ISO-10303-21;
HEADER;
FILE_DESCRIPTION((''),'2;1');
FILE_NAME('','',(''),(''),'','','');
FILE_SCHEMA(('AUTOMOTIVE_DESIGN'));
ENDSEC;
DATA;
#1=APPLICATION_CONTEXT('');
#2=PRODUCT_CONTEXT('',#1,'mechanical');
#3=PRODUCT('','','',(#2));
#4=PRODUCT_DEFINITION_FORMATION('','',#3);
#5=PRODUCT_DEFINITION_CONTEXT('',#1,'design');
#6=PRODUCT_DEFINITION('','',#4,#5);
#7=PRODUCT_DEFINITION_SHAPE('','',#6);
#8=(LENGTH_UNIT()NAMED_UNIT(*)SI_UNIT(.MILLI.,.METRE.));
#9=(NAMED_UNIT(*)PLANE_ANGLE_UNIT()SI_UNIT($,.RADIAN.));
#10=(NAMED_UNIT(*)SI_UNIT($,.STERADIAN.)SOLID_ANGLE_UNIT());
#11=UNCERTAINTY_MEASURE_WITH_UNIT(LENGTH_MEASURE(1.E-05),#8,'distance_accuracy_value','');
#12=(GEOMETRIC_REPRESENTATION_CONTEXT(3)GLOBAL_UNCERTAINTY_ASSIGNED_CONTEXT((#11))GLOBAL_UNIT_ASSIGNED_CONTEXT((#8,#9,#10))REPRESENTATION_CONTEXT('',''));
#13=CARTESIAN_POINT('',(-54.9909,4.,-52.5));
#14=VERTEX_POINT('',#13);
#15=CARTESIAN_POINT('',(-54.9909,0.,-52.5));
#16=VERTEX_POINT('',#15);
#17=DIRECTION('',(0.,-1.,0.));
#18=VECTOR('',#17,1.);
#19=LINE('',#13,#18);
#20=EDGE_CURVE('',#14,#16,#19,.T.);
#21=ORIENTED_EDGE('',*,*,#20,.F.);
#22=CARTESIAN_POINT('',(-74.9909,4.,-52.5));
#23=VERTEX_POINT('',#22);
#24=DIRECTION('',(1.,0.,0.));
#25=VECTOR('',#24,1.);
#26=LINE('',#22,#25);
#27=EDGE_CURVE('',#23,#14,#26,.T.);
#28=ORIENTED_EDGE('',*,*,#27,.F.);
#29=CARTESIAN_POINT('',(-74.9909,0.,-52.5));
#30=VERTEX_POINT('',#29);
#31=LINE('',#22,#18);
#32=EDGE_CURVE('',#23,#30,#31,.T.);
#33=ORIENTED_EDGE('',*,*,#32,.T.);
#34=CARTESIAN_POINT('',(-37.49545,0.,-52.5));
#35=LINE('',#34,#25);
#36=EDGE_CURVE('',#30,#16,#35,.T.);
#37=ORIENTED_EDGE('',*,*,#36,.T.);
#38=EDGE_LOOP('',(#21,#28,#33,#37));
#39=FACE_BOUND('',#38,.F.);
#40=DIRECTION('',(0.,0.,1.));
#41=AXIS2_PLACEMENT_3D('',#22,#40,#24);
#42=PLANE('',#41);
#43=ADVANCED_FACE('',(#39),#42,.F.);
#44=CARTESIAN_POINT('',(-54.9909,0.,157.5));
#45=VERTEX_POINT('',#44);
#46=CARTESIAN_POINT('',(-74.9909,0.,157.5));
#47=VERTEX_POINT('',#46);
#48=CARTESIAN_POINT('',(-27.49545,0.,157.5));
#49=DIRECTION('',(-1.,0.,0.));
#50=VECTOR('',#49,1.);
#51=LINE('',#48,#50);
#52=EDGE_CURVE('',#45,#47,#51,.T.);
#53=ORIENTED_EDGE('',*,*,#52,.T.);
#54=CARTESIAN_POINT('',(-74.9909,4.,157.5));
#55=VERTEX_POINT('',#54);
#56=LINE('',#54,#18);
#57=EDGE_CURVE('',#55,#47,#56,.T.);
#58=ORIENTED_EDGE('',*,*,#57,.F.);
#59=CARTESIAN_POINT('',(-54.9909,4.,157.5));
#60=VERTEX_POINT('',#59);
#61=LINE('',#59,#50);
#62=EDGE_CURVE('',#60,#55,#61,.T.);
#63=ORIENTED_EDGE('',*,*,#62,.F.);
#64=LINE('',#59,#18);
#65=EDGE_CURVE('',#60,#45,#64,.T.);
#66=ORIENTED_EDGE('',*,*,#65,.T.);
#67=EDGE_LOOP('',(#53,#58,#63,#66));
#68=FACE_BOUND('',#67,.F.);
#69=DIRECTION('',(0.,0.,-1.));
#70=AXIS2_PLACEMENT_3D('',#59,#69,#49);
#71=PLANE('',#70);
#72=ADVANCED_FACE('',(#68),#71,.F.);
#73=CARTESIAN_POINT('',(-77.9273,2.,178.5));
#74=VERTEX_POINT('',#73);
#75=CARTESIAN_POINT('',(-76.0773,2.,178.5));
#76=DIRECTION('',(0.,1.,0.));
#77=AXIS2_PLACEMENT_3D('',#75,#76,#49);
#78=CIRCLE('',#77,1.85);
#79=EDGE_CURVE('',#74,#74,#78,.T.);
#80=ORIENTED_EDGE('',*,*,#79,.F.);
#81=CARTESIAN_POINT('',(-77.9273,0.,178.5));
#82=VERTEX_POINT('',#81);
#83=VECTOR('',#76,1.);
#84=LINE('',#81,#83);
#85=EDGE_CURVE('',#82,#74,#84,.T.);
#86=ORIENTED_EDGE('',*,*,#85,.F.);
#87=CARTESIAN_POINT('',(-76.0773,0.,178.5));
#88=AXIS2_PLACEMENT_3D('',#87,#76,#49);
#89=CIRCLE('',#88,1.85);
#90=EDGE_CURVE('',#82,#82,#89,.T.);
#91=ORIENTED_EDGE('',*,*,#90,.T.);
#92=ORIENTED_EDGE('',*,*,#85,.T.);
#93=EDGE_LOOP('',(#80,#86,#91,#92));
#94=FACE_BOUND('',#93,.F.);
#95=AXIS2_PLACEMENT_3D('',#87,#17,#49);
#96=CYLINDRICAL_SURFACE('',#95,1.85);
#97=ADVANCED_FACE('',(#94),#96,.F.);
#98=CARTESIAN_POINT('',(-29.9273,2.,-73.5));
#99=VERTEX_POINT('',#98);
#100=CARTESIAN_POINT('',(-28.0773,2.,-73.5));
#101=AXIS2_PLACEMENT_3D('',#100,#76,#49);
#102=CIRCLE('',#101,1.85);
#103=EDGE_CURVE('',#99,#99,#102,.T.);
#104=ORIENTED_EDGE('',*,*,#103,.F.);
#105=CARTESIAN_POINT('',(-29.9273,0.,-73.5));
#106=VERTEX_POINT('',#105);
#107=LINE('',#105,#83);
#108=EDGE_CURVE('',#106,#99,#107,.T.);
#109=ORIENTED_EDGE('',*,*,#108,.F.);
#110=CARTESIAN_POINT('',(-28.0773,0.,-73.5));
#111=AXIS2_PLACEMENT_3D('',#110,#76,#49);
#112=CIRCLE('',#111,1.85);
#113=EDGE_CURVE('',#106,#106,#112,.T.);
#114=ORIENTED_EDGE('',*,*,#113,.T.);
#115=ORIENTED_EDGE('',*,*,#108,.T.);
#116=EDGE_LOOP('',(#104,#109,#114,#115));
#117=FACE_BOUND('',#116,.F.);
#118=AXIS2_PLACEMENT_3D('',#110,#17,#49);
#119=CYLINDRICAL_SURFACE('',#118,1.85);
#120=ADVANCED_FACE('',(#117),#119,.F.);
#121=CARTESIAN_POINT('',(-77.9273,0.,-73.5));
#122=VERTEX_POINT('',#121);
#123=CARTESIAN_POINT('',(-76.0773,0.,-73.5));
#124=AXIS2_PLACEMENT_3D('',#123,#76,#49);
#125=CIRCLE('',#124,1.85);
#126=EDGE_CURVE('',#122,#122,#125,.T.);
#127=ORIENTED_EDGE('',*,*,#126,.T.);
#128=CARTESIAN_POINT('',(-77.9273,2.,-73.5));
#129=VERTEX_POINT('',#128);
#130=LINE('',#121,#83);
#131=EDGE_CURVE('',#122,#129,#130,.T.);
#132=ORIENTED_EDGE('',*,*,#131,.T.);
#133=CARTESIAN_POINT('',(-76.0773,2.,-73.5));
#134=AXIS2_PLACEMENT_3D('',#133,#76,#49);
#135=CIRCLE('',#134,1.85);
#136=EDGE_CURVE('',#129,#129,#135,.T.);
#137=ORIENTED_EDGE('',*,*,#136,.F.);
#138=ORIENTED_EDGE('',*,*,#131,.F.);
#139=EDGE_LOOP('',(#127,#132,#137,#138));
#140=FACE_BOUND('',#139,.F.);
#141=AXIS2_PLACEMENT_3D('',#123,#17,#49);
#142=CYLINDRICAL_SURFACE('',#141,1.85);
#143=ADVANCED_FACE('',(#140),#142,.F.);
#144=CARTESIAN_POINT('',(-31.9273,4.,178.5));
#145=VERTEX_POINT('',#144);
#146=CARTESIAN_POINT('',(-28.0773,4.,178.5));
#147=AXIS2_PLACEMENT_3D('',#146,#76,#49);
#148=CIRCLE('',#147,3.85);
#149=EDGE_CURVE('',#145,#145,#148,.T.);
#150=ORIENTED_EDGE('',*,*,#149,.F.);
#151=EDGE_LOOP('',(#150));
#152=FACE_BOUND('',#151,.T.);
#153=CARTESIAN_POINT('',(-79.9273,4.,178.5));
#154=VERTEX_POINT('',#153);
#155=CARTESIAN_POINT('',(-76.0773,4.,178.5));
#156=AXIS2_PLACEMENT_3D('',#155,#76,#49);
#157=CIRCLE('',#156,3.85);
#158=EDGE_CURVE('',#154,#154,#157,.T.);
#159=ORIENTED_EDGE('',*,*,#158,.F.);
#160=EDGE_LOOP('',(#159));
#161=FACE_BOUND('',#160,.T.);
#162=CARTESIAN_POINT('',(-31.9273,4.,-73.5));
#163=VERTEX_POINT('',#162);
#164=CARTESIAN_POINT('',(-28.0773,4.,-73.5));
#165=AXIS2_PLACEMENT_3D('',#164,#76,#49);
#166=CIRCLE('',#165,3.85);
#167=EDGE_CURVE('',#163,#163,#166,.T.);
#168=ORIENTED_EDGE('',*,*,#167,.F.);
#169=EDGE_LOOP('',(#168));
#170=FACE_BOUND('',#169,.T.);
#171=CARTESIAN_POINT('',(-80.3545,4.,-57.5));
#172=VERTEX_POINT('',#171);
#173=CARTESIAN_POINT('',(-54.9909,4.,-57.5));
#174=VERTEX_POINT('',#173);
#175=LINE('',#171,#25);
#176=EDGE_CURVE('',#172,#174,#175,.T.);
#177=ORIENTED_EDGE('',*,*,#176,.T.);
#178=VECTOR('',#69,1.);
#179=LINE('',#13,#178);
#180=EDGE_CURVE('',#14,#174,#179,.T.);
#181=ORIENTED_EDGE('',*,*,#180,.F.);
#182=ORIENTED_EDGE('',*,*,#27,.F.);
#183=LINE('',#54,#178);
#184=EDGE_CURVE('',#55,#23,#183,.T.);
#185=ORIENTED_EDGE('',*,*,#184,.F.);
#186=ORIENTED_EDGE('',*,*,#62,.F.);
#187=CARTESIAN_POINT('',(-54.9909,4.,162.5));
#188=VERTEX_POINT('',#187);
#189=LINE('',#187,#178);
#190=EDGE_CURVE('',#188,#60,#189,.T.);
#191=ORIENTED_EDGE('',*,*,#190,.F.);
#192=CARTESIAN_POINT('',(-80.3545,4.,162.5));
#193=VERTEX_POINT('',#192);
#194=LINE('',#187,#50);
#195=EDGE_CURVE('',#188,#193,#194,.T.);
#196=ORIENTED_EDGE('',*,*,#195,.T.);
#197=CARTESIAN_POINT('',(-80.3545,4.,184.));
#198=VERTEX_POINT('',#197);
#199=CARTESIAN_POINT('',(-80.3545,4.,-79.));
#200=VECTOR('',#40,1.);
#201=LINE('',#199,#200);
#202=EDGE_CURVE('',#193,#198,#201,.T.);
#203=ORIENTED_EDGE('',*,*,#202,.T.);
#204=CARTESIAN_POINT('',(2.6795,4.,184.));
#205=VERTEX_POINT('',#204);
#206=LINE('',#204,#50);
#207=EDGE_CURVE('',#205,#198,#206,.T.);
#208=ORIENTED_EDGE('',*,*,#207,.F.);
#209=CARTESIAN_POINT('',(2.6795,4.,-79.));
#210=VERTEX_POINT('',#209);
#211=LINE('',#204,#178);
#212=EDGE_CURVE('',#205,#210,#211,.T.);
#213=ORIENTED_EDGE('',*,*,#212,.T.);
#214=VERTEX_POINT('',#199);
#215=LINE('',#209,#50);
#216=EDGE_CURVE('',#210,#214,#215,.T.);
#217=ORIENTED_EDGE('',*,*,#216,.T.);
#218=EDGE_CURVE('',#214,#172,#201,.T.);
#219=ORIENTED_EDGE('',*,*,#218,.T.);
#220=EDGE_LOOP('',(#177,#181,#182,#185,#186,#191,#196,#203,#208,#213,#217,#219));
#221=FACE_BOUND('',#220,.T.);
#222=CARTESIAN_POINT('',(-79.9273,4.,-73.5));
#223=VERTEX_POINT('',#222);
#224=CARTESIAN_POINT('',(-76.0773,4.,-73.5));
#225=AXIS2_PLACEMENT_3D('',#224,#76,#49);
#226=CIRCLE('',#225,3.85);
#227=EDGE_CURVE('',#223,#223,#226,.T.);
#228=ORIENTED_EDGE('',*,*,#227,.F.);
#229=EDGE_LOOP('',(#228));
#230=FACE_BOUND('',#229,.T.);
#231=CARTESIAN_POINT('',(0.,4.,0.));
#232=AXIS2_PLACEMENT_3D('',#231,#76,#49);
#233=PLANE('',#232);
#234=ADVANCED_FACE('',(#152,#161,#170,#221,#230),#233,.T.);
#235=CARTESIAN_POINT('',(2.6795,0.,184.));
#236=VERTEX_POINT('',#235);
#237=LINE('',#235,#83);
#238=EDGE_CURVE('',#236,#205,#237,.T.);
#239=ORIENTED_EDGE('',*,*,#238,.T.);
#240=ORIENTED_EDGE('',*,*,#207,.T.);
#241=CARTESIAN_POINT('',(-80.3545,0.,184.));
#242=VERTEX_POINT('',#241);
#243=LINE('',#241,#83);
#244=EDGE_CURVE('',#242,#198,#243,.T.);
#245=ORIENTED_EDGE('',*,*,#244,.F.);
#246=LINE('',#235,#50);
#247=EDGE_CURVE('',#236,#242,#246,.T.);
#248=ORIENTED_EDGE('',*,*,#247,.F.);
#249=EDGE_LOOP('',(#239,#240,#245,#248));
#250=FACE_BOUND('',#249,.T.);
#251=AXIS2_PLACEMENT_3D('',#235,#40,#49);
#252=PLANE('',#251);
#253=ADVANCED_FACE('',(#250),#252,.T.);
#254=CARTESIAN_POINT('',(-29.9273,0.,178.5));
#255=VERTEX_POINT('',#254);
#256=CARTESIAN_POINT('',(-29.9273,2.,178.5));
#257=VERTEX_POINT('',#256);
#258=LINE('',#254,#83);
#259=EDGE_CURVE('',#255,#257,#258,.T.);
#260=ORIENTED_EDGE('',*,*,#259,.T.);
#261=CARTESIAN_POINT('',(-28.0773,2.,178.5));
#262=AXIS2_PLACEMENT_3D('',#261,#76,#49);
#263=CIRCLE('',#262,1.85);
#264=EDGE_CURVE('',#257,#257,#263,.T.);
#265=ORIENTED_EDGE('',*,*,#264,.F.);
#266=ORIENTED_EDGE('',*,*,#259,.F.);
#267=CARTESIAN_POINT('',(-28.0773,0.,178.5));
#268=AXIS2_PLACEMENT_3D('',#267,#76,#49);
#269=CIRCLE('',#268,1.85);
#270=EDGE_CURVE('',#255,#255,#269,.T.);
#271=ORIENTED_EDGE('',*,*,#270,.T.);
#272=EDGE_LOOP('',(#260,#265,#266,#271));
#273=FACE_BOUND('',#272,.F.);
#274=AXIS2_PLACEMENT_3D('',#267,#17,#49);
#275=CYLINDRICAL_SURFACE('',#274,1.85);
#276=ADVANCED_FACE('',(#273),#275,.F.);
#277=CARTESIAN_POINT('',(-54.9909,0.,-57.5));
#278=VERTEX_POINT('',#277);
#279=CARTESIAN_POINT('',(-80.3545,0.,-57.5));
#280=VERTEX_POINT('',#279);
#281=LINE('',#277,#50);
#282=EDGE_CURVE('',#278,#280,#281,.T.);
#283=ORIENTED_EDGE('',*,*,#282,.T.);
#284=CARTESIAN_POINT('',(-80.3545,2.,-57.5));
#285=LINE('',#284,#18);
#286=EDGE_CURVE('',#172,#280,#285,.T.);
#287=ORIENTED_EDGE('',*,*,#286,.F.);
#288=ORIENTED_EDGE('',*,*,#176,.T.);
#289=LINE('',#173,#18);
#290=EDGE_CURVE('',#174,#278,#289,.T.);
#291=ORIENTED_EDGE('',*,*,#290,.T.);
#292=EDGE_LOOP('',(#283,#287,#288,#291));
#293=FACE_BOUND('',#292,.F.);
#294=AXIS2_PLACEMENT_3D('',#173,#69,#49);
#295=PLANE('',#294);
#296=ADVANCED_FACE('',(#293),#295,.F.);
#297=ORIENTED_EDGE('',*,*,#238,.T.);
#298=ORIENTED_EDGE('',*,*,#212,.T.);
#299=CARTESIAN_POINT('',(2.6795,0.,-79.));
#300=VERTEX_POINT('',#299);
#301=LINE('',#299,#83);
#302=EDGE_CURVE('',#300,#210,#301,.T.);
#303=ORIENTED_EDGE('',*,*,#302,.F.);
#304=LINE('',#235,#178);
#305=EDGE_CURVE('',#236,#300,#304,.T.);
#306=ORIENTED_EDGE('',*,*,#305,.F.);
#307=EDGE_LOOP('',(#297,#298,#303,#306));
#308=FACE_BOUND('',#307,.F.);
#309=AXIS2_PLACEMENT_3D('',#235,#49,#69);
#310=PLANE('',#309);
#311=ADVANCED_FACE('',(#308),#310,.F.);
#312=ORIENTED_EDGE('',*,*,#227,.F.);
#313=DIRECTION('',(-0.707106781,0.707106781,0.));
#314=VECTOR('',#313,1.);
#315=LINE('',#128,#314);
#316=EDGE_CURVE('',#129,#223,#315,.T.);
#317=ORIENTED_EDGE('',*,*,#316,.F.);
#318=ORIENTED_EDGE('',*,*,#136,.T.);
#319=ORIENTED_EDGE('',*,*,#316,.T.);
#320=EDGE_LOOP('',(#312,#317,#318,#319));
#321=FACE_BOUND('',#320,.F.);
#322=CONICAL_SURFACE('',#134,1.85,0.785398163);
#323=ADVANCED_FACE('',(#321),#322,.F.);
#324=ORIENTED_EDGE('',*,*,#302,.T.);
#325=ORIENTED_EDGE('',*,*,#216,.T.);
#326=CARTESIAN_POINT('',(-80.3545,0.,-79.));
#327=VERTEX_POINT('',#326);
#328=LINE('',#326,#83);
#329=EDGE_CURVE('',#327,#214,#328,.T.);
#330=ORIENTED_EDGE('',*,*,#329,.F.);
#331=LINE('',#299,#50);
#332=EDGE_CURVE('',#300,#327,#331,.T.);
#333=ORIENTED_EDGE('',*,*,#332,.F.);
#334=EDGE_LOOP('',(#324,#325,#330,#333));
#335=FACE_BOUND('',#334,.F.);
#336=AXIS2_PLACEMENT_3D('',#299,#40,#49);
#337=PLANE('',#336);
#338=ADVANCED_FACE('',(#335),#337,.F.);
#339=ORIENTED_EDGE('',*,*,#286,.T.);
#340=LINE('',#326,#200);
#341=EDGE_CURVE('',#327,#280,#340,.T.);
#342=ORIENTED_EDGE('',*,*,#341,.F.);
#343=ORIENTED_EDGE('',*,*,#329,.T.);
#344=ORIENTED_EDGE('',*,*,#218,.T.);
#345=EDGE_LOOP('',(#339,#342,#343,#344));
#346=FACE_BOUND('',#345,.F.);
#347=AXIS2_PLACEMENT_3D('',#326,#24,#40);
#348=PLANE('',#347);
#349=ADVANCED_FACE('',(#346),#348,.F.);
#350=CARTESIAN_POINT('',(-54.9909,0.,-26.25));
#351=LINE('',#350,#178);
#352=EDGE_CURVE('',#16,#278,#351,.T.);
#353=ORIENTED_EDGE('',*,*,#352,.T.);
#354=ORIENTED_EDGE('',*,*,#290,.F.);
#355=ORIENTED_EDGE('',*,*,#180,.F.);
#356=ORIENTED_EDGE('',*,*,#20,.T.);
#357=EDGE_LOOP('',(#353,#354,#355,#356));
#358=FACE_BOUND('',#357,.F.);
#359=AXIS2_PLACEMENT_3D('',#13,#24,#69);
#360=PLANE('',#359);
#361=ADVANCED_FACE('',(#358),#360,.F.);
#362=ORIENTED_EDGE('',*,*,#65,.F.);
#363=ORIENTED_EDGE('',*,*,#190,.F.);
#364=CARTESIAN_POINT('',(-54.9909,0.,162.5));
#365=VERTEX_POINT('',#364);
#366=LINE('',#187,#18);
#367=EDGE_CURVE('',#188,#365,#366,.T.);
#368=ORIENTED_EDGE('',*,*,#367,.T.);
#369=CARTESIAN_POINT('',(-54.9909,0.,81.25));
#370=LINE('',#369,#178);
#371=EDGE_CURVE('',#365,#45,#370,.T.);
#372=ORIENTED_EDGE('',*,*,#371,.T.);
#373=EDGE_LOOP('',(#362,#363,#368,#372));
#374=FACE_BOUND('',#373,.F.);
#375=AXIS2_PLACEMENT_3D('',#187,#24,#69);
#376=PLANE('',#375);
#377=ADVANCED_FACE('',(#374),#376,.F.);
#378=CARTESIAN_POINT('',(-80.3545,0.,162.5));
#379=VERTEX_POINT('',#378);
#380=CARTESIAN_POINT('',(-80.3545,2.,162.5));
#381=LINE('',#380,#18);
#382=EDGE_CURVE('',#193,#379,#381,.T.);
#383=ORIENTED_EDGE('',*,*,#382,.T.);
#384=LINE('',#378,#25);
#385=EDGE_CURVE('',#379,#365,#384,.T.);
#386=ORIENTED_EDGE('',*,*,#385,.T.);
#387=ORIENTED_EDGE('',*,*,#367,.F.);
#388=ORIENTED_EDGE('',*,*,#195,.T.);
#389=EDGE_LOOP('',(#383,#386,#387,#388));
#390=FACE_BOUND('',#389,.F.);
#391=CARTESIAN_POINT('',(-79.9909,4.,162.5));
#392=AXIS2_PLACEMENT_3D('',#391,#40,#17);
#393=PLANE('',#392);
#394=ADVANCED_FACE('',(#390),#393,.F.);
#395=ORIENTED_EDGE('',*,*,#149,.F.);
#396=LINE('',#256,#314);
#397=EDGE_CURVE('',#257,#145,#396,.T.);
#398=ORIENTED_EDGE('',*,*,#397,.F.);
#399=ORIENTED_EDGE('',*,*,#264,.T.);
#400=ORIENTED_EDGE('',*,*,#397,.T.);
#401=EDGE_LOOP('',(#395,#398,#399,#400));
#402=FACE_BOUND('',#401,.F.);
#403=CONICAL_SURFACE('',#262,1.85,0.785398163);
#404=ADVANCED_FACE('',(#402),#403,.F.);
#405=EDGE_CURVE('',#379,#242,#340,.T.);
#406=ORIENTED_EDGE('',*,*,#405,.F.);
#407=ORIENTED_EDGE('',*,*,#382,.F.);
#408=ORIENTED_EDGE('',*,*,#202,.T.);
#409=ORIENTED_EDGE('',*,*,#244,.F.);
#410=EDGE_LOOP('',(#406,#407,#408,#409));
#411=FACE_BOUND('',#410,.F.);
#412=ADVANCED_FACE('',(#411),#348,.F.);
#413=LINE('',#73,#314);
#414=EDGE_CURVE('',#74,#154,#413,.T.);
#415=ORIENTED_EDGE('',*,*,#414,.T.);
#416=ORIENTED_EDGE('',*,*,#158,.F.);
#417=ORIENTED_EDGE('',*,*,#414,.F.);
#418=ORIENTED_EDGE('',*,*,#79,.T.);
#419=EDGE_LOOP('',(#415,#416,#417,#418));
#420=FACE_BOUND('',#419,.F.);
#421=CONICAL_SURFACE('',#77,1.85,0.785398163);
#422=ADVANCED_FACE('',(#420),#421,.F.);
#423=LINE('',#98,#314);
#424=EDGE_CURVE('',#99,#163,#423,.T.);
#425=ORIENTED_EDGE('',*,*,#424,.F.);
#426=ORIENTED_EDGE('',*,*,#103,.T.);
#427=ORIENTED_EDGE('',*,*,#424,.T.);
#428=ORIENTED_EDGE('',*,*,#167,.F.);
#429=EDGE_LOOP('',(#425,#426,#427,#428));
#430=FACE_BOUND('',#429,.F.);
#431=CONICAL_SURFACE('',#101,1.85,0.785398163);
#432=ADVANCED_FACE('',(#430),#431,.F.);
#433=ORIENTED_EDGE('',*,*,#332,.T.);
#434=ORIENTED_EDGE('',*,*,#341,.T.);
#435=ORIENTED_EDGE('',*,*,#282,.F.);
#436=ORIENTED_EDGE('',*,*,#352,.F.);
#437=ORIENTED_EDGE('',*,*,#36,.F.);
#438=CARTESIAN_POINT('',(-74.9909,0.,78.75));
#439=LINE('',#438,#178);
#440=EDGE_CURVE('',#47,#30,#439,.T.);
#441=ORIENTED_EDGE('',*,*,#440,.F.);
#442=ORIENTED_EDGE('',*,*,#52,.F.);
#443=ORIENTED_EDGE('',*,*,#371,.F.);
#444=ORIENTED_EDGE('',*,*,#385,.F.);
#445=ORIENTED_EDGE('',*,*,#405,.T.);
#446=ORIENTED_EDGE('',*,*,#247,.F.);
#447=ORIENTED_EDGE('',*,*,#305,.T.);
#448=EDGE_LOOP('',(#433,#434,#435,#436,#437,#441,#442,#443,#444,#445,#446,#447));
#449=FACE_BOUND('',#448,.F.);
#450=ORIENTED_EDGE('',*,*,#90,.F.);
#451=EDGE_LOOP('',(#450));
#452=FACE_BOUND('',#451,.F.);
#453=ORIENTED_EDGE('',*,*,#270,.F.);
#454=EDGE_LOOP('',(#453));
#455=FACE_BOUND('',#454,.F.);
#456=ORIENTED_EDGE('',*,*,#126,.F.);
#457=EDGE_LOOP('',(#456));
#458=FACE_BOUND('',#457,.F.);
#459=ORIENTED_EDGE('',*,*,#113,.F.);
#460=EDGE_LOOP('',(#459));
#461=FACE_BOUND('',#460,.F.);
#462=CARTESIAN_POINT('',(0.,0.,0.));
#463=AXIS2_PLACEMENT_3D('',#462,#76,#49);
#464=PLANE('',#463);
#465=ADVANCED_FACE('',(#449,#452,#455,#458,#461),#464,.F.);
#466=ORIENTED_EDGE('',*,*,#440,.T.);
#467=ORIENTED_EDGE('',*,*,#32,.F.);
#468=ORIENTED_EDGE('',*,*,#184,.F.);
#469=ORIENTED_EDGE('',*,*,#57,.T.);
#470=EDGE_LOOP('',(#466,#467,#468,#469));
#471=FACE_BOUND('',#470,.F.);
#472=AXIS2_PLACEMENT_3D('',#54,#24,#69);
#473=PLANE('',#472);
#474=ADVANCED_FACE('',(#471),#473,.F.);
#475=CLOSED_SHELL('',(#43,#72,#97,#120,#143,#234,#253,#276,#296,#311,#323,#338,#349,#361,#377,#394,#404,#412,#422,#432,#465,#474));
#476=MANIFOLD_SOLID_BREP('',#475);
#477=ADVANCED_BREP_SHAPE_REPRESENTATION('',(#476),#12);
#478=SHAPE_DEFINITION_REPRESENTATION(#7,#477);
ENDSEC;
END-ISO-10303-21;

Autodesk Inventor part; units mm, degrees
ref_plane "YZ Plane" through (0, 0, 0) normal (1, 0, 0) x (0, 1, 0)
ref_plane "XZ Plane" through (0, 0, 0) normal (0, 1, 0) x (-1, 0, 0)
ref_plane "XY Plane" through (0, 0, 0) normal (0, 0, 1) x (1, 0, 0)
sketch "Эскиз1" plane through (0, 0, 0) normal (0, 1, 0) x (-1, 0, 0)
  line L0 (-2.6795, -79) -> (80.3545, -79)
  line L1 (-2.6795, 184) -> (80.3545, 184)
  circle A0 centre (28.0773, 178.5) radius 1.85
  circle A1 centre (76.0773, 178.5) radius 1.85
  circle A2 centre (76.0773, -73.5) radius 1.85
  circle A3 centre (28.0773, -73.5) radius 1.85
  line L2 (80.3545, 184) -> (-2.6795, 184)
  line L3 (-2.6795, 184) -> (-2.6795, -79)
  line L4 (-2.6795, -79) -> (80.3545, -79)
  line L5 (80.3545, -79) -> (80.3545, 184)
  point P0 (0, 0)
  point P1 (83.0251, -19)
  dimension "d7" = 5.5
  dimension "d8" = 48
  dimension "d9" = 4.2772
  dimension "d10" = 5.5
  dimension "d11" = 263
  dimension "d12" = 83.034
extrude "Выдавливание1" add sketch "Эскиз1" along normal blind 4
chamfer "Фаска1" distance 2 angle 45 4 edges at (-74.2273, 4, 178.5) (-26.2273, 4, 178.5) (-26.2273, 4, -73.5) (-74.2273, 4, -73.5)
sketch "Эскиз2" plane through (0, 4, 0) normal (0, 1, 0) x (1, 0, 0)
  line L0 (-74.9909, -157.5) -> (-74.9909, 52.5) projected
  line L1 (-74.9909, 52.5) -> (-54.9909, 52.5) projected
  line L2 (-54.9909, -157.5) -> (-74.9909, -157.5) projected
  line L3 (-54.9909, 57.5) -> (-74.9909, 57.5) projected
  line L4 (-74.9909, 57.5) -> (-79.9909, 57.5) projected
  line L5 (-79.9909, 57.5) -> (-79.9909, -162.5) projected
  line L6 (-79.9909, -162.5) -> (-74.9909, -162.5) projected
  line L7 (-74.9909, -162.5) -> (-54.9909, -162.5) projected
  line L8 (-54.9909, -162.5) -> (-54.9909, -157.5) projected
  line L9 (-54.9909, 52.5) -> (-54.9909, 57.5) projected
  point P0 (0, 0)
extrude "Выдавливание2" cut sketch "Эскиз2" against normal blind 10
thicken "Толщина2" operation add thickness 1 both sides no extend neighbours yes toward (-1, 0, 0) faces at (-79.9909, 2.6667, 15.8333)
properties part number "KB33-046-004-002 - Передняя пластина" material "Дерево (вишня)"
